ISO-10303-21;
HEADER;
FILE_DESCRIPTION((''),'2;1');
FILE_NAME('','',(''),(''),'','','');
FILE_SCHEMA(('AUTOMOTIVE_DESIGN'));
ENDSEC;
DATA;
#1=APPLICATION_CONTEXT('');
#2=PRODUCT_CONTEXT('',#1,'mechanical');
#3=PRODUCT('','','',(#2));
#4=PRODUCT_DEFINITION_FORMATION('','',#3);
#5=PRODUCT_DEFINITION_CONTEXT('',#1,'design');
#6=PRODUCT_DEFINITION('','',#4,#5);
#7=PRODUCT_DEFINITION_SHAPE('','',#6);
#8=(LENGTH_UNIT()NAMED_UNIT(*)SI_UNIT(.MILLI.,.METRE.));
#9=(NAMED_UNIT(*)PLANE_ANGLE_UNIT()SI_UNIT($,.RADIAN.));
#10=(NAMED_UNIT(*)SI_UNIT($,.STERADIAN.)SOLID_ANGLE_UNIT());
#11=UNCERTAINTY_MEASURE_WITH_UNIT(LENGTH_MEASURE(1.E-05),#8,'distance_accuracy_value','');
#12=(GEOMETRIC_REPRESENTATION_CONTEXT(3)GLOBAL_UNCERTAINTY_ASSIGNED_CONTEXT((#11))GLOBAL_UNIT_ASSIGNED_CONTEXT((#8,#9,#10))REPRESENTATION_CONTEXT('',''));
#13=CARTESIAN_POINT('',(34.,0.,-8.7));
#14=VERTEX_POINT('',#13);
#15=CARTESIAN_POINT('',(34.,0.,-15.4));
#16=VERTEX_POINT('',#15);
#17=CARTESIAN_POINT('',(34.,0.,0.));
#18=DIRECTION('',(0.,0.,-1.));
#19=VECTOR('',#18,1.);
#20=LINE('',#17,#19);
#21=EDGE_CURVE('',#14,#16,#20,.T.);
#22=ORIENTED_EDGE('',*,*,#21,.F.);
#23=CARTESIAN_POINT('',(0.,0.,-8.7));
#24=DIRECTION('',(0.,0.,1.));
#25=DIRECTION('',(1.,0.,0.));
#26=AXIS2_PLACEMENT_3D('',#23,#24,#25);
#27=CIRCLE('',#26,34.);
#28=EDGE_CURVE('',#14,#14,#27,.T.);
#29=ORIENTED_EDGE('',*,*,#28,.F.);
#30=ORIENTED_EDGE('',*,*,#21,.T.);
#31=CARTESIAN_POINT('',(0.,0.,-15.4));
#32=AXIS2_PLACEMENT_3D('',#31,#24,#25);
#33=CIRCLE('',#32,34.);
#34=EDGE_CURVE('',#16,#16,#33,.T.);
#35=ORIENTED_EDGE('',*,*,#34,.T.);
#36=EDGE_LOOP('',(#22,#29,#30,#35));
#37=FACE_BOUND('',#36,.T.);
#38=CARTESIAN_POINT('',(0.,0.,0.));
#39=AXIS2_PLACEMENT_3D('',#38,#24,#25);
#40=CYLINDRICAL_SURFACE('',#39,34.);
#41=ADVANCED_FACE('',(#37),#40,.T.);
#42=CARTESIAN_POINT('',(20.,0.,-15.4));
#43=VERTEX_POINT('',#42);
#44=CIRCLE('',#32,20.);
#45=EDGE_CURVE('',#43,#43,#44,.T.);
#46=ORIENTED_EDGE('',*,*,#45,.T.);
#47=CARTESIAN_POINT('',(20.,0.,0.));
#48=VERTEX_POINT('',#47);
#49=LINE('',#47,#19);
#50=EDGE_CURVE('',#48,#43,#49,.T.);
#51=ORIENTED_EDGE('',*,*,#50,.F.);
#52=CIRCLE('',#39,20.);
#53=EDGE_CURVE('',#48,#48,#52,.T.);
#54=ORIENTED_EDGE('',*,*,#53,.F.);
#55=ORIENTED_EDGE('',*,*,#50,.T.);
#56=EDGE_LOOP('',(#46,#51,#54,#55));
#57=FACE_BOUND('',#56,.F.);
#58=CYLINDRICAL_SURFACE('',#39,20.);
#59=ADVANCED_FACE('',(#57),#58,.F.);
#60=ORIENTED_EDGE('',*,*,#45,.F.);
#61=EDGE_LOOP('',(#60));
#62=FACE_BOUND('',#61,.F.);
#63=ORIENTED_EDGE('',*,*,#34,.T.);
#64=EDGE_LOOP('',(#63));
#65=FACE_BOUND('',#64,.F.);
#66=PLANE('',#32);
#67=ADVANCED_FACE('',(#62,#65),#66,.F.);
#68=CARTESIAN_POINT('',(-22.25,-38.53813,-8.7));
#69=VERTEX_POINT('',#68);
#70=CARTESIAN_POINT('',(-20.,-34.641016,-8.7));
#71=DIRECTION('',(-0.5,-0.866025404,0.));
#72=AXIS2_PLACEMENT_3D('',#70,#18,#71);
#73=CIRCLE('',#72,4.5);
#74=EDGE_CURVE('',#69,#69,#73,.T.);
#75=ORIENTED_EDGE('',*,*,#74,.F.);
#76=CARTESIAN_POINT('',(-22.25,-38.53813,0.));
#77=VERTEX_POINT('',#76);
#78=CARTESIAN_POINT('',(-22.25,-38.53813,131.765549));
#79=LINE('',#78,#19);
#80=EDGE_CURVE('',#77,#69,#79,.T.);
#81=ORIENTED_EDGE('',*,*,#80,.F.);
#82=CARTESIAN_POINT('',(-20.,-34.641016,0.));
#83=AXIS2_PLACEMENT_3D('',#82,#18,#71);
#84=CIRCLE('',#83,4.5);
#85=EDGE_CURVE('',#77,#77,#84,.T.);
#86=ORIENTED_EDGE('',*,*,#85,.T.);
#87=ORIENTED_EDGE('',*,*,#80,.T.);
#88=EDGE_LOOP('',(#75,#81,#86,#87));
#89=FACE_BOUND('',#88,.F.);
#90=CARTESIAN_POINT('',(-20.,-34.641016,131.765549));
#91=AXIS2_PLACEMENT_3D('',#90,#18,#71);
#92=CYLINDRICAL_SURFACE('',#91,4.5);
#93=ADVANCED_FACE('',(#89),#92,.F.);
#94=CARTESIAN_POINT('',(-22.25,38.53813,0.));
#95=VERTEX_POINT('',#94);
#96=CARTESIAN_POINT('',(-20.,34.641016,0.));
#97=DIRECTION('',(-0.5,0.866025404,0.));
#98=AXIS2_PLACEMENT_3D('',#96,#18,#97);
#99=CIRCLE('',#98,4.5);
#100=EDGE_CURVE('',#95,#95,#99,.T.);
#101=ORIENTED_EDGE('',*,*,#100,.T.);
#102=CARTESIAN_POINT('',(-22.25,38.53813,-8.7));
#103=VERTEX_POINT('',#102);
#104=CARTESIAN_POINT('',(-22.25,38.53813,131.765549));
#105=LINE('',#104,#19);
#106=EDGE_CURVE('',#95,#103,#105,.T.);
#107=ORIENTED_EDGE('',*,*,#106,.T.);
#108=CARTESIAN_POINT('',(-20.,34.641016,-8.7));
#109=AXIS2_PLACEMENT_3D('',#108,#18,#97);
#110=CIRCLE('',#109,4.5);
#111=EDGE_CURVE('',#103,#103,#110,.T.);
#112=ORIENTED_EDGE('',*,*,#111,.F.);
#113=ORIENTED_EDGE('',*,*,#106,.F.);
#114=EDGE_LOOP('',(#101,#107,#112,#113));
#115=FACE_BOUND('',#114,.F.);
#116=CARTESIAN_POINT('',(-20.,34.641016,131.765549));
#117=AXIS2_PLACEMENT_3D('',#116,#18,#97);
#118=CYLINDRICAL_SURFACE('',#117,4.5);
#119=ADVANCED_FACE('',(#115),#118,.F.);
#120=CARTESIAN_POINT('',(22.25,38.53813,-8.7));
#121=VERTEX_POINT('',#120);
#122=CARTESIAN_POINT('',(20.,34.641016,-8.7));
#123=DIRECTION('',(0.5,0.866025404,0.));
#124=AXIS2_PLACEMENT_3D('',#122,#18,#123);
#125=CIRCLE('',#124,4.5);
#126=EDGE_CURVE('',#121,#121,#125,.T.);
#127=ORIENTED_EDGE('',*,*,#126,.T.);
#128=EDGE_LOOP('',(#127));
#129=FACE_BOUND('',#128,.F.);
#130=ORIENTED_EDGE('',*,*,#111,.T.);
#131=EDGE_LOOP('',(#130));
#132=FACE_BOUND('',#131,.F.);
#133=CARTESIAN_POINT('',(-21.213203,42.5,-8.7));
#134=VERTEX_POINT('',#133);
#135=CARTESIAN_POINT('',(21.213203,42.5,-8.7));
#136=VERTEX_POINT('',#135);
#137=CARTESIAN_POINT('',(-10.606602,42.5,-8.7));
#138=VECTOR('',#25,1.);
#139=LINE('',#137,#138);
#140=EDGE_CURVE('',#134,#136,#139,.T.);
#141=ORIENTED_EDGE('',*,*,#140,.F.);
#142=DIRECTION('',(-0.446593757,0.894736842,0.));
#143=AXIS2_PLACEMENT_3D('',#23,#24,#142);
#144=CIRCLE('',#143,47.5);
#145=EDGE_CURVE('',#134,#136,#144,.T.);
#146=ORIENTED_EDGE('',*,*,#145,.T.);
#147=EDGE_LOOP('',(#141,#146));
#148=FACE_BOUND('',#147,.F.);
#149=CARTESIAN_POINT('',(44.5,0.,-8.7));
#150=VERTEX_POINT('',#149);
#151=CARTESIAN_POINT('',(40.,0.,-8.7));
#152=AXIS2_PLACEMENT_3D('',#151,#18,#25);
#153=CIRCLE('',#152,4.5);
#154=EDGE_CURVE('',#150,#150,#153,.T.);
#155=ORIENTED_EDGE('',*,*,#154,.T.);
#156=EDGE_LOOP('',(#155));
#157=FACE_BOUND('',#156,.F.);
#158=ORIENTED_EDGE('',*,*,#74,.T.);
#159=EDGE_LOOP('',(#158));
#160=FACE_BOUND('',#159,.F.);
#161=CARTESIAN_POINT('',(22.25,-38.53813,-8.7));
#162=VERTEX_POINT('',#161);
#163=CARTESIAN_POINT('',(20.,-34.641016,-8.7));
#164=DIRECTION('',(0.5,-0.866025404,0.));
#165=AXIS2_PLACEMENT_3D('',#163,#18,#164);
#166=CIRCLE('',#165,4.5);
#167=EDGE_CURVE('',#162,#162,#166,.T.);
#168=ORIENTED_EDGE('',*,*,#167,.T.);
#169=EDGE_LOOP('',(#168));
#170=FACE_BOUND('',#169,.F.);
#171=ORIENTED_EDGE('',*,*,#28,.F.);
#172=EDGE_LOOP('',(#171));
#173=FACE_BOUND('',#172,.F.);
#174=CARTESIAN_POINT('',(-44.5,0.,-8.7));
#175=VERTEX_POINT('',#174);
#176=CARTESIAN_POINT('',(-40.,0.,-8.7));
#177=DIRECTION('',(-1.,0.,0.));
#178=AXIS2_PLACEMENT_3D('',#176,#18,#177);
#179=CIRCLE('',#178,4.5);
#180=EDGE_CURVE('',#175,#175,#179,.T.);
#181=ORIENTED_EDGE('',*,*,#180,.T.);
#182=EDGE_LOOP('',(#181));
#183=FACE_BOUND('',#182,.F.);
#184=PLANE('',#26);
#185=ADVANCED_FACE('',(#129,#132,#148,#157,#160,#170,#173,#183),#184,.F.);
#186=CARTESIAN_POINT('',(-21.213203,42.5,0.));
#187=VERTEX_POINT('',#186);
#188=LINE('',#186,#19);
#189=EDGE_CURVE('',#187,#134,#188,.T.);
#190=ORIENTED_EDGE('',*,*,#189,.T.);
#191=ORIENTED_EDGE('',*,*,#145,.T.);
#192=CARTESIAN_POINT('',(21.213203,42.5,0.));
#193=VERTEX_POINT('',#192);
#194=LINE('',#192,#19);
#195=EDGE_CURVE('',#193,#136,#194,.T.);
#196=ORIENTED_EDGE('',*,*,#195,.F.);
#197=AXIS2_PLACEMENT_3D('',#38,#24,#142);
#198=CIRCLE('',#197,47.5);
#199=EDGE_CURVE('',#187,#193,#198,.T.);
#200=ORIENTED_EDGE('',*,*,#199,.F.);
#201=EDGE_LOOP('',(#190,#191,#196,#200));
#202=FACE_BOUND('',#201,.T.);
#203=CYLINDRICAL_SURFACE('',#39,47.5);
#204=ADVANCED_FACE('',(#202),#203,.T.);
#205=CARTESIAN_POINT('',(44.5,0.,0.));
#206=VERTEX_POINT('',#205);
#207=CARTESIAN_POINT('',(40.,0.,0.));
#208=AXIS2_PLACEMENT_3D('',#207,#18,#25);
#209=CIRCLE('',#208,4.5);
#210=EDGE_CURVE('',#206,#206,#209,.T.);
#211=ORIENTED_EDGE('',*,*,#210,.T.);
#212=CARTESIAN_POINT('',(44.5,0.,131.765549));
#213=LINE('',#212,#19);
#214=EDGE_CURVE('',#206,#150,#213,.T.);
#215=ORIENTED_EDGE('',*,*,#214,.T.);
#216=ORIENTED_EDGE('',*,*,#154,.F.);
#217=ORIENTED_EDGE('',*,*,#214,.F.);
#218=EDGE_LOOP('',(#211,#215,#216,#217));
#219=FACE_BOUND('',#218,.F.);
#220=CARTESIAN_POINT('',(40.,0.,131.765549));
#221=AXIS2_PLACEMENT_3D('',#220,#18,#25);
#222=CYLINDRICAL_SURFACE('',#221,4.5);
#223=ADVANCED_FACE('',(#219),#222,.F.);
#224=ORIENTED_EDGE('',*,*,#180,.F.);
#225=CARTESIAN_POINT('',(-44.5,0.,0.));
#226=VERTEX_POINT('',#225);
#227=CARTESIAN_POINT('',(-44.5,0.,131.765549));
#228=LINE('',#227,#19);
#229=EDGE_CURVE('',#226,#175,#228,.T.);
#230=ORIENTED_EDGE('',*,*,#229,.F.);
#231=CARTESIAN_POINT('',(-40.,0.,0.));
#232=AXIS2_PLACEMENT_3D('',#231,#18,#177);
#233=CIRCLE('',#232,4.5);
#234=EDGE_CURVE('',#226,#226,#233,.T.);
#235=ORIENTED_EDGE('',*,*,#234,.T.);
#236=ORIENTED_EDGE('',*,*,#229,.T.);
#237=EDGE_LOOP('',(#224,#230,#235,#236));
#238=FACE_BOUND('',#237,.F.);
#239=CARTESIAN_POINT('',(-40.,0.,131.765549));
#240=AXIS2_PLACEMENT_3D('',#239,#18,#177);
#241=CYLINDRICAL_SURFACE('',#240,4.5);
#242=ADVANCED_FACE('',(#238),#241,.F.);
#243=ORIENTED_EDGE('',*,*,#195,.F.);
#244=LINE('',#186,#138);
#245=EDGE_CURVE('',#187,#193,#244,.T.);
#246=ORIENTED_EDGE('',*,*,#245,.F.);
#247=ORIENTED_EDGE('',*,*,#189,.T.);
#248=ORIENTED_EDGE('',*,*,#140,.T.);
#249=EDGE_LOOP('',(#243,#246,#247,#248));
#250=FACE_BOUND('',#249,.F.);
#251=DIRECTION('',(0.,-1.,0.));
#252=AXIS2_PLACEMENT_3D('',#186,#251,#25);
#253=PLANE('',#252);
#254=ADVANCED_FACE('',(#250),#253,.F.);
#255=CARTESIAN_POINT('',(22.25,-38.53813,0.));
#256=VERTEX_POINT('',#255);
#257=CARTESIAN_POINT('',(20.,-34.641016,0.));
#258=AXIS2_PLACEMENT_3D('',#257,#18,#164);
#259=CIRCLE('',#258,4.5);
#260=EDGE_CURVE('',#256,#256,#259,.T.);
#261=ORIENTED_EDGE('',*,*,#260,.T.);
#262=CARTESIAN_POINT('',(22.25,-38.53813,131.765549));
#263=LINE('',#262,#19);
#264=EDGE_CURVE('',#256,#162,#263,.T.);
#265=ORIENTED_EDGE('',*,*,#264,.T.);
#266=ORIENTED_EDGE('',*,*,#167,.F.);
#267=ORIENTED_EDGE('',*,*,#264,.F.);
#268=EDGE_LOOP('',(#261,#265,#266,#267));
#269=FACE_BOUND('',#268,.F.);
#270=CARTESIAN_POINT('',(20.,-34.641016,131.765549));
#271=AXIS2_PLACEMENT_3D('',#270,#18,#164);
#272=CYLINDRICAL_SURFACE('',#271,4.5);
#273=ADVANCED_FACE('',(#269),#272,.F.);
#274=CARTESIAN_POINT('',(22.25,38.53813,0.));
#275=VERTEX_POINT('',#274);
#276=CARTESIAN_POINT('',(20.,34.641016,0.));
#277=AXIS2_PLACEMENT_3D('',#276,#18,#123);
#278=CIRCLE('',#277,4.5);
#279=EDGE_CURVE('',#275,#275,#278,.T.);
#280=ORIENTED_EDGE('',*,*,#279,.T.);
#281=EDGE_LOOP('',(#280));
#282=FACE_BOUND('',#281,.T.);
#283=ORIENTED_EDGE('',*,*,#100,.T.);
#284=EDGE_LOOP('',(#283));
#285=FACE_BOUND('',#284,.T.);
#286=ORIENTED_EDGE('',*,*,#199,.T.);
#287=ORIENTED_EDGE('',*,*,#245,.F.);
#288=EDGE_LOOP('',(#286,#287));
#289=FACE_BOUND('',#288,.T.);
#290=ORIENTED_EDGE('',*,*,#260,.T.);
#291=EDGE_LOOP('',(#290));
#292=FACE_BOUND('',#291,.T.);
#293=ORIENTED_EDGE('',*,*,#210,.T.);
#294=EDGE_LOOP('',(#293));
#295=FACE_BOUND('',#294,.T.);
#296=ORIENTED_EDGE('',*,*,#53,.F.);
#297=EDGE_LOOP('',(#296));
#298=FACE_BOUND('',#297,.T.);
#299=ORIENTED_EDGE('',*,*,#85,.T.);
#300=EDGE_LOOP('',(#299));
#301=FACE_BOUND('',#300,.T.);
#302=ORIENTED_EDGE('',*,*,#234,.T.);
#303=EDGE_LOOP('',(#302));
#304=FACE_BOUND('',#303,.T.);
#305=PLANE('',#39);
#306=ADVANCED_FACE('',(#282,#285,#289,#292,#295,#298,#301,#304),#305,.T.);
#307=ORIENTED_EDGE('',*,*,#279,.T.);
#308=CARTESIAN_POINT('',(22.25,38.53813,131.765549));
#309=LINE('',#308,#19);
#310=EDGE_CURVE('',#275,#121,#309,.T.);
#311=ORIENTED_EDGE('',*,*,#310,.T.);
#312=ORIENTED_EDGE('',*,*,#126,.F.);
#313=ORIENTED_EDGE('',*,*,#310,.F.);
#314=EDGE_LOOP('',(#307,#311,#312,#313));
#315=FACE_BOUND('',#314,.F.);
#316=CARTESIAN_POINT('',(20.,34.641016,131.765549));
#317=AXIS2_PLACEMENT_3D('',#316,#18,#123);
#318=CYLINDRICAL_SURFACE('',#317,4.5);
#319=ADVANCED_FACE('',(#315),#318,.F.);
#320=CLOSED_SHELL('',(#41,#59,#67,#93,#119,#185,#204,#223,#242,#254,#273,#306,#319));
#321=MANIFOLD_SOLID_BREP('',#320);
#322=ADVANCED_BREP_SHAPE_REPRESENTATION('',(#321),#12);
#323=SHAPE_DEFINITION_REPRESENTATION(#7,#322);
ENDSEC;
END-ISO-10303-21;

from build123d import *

# Parameters (mm, degrees)
F0_R            = 47.5
F1_DEPTH        = 8.7
F2_R            = 34
F3_DEPTH        = 15.4
F5_DEPTH        = 15.401
F6_R            = 20
F7_DEPTH        = 15.401
F9_D            = 9
F9_COPIES_COUNT = 6


# Not quite as in the source:
# - a pattern or mirror of a feature is missing from the dataset's text; its kind, count and spacing are read off the source's solid


with BuildPart() as f1:
    # F0 (on Top) → F1 (new body)
    with BuildSketch(Plane.XY):
        Circle(F0_R)
    extrude(amount=-F1_DEPTH)

    # F2 (on face) → F3 (join)
    with BuildSketch(Plane.XY):
        Circle(F2_R)
    extrude(amount=-F3_DEPTH)

    # F4 (on face) → F5 (cut, through all)
    with BuildSketch(Plane.XY):
        with BuildLine():
            Line((-21.2132034356, 42.5), (21.2132034356, 42.5))
            ThreePointArc((21.2132034356, 42.5), (0, 47.5), (-21.2132034356, 42.5))
        make_face()
    extrude(amount=-F5_DEPTH, mode=Mode.SUBTRACT)

    # F6 (on face) → F7 (cut, through all)
    with BuildSketch(Plane.XY):
        Circle(F6_R)
    extrude(amount=-F7_DEPTH, mode=Mode.SUBTRACT)

    # F9 (through all)
    with Locations(Plane.XY):
        with Locations((-40, 0)):
            f9 = Hole(F9_D / 2)

    # F9_copies: F9 ×6 about axis
    f9_copies_axis = Axis((0, 0, 0), (0, 0, 1))
    for i in range(1, F9_COPIES_COUNT):
        add(f9.rotate(f9_copies_axis, i * 360 / F9_COPIES_COUNT), mode=Mode.SUBTRACT)


solid = f1.part
